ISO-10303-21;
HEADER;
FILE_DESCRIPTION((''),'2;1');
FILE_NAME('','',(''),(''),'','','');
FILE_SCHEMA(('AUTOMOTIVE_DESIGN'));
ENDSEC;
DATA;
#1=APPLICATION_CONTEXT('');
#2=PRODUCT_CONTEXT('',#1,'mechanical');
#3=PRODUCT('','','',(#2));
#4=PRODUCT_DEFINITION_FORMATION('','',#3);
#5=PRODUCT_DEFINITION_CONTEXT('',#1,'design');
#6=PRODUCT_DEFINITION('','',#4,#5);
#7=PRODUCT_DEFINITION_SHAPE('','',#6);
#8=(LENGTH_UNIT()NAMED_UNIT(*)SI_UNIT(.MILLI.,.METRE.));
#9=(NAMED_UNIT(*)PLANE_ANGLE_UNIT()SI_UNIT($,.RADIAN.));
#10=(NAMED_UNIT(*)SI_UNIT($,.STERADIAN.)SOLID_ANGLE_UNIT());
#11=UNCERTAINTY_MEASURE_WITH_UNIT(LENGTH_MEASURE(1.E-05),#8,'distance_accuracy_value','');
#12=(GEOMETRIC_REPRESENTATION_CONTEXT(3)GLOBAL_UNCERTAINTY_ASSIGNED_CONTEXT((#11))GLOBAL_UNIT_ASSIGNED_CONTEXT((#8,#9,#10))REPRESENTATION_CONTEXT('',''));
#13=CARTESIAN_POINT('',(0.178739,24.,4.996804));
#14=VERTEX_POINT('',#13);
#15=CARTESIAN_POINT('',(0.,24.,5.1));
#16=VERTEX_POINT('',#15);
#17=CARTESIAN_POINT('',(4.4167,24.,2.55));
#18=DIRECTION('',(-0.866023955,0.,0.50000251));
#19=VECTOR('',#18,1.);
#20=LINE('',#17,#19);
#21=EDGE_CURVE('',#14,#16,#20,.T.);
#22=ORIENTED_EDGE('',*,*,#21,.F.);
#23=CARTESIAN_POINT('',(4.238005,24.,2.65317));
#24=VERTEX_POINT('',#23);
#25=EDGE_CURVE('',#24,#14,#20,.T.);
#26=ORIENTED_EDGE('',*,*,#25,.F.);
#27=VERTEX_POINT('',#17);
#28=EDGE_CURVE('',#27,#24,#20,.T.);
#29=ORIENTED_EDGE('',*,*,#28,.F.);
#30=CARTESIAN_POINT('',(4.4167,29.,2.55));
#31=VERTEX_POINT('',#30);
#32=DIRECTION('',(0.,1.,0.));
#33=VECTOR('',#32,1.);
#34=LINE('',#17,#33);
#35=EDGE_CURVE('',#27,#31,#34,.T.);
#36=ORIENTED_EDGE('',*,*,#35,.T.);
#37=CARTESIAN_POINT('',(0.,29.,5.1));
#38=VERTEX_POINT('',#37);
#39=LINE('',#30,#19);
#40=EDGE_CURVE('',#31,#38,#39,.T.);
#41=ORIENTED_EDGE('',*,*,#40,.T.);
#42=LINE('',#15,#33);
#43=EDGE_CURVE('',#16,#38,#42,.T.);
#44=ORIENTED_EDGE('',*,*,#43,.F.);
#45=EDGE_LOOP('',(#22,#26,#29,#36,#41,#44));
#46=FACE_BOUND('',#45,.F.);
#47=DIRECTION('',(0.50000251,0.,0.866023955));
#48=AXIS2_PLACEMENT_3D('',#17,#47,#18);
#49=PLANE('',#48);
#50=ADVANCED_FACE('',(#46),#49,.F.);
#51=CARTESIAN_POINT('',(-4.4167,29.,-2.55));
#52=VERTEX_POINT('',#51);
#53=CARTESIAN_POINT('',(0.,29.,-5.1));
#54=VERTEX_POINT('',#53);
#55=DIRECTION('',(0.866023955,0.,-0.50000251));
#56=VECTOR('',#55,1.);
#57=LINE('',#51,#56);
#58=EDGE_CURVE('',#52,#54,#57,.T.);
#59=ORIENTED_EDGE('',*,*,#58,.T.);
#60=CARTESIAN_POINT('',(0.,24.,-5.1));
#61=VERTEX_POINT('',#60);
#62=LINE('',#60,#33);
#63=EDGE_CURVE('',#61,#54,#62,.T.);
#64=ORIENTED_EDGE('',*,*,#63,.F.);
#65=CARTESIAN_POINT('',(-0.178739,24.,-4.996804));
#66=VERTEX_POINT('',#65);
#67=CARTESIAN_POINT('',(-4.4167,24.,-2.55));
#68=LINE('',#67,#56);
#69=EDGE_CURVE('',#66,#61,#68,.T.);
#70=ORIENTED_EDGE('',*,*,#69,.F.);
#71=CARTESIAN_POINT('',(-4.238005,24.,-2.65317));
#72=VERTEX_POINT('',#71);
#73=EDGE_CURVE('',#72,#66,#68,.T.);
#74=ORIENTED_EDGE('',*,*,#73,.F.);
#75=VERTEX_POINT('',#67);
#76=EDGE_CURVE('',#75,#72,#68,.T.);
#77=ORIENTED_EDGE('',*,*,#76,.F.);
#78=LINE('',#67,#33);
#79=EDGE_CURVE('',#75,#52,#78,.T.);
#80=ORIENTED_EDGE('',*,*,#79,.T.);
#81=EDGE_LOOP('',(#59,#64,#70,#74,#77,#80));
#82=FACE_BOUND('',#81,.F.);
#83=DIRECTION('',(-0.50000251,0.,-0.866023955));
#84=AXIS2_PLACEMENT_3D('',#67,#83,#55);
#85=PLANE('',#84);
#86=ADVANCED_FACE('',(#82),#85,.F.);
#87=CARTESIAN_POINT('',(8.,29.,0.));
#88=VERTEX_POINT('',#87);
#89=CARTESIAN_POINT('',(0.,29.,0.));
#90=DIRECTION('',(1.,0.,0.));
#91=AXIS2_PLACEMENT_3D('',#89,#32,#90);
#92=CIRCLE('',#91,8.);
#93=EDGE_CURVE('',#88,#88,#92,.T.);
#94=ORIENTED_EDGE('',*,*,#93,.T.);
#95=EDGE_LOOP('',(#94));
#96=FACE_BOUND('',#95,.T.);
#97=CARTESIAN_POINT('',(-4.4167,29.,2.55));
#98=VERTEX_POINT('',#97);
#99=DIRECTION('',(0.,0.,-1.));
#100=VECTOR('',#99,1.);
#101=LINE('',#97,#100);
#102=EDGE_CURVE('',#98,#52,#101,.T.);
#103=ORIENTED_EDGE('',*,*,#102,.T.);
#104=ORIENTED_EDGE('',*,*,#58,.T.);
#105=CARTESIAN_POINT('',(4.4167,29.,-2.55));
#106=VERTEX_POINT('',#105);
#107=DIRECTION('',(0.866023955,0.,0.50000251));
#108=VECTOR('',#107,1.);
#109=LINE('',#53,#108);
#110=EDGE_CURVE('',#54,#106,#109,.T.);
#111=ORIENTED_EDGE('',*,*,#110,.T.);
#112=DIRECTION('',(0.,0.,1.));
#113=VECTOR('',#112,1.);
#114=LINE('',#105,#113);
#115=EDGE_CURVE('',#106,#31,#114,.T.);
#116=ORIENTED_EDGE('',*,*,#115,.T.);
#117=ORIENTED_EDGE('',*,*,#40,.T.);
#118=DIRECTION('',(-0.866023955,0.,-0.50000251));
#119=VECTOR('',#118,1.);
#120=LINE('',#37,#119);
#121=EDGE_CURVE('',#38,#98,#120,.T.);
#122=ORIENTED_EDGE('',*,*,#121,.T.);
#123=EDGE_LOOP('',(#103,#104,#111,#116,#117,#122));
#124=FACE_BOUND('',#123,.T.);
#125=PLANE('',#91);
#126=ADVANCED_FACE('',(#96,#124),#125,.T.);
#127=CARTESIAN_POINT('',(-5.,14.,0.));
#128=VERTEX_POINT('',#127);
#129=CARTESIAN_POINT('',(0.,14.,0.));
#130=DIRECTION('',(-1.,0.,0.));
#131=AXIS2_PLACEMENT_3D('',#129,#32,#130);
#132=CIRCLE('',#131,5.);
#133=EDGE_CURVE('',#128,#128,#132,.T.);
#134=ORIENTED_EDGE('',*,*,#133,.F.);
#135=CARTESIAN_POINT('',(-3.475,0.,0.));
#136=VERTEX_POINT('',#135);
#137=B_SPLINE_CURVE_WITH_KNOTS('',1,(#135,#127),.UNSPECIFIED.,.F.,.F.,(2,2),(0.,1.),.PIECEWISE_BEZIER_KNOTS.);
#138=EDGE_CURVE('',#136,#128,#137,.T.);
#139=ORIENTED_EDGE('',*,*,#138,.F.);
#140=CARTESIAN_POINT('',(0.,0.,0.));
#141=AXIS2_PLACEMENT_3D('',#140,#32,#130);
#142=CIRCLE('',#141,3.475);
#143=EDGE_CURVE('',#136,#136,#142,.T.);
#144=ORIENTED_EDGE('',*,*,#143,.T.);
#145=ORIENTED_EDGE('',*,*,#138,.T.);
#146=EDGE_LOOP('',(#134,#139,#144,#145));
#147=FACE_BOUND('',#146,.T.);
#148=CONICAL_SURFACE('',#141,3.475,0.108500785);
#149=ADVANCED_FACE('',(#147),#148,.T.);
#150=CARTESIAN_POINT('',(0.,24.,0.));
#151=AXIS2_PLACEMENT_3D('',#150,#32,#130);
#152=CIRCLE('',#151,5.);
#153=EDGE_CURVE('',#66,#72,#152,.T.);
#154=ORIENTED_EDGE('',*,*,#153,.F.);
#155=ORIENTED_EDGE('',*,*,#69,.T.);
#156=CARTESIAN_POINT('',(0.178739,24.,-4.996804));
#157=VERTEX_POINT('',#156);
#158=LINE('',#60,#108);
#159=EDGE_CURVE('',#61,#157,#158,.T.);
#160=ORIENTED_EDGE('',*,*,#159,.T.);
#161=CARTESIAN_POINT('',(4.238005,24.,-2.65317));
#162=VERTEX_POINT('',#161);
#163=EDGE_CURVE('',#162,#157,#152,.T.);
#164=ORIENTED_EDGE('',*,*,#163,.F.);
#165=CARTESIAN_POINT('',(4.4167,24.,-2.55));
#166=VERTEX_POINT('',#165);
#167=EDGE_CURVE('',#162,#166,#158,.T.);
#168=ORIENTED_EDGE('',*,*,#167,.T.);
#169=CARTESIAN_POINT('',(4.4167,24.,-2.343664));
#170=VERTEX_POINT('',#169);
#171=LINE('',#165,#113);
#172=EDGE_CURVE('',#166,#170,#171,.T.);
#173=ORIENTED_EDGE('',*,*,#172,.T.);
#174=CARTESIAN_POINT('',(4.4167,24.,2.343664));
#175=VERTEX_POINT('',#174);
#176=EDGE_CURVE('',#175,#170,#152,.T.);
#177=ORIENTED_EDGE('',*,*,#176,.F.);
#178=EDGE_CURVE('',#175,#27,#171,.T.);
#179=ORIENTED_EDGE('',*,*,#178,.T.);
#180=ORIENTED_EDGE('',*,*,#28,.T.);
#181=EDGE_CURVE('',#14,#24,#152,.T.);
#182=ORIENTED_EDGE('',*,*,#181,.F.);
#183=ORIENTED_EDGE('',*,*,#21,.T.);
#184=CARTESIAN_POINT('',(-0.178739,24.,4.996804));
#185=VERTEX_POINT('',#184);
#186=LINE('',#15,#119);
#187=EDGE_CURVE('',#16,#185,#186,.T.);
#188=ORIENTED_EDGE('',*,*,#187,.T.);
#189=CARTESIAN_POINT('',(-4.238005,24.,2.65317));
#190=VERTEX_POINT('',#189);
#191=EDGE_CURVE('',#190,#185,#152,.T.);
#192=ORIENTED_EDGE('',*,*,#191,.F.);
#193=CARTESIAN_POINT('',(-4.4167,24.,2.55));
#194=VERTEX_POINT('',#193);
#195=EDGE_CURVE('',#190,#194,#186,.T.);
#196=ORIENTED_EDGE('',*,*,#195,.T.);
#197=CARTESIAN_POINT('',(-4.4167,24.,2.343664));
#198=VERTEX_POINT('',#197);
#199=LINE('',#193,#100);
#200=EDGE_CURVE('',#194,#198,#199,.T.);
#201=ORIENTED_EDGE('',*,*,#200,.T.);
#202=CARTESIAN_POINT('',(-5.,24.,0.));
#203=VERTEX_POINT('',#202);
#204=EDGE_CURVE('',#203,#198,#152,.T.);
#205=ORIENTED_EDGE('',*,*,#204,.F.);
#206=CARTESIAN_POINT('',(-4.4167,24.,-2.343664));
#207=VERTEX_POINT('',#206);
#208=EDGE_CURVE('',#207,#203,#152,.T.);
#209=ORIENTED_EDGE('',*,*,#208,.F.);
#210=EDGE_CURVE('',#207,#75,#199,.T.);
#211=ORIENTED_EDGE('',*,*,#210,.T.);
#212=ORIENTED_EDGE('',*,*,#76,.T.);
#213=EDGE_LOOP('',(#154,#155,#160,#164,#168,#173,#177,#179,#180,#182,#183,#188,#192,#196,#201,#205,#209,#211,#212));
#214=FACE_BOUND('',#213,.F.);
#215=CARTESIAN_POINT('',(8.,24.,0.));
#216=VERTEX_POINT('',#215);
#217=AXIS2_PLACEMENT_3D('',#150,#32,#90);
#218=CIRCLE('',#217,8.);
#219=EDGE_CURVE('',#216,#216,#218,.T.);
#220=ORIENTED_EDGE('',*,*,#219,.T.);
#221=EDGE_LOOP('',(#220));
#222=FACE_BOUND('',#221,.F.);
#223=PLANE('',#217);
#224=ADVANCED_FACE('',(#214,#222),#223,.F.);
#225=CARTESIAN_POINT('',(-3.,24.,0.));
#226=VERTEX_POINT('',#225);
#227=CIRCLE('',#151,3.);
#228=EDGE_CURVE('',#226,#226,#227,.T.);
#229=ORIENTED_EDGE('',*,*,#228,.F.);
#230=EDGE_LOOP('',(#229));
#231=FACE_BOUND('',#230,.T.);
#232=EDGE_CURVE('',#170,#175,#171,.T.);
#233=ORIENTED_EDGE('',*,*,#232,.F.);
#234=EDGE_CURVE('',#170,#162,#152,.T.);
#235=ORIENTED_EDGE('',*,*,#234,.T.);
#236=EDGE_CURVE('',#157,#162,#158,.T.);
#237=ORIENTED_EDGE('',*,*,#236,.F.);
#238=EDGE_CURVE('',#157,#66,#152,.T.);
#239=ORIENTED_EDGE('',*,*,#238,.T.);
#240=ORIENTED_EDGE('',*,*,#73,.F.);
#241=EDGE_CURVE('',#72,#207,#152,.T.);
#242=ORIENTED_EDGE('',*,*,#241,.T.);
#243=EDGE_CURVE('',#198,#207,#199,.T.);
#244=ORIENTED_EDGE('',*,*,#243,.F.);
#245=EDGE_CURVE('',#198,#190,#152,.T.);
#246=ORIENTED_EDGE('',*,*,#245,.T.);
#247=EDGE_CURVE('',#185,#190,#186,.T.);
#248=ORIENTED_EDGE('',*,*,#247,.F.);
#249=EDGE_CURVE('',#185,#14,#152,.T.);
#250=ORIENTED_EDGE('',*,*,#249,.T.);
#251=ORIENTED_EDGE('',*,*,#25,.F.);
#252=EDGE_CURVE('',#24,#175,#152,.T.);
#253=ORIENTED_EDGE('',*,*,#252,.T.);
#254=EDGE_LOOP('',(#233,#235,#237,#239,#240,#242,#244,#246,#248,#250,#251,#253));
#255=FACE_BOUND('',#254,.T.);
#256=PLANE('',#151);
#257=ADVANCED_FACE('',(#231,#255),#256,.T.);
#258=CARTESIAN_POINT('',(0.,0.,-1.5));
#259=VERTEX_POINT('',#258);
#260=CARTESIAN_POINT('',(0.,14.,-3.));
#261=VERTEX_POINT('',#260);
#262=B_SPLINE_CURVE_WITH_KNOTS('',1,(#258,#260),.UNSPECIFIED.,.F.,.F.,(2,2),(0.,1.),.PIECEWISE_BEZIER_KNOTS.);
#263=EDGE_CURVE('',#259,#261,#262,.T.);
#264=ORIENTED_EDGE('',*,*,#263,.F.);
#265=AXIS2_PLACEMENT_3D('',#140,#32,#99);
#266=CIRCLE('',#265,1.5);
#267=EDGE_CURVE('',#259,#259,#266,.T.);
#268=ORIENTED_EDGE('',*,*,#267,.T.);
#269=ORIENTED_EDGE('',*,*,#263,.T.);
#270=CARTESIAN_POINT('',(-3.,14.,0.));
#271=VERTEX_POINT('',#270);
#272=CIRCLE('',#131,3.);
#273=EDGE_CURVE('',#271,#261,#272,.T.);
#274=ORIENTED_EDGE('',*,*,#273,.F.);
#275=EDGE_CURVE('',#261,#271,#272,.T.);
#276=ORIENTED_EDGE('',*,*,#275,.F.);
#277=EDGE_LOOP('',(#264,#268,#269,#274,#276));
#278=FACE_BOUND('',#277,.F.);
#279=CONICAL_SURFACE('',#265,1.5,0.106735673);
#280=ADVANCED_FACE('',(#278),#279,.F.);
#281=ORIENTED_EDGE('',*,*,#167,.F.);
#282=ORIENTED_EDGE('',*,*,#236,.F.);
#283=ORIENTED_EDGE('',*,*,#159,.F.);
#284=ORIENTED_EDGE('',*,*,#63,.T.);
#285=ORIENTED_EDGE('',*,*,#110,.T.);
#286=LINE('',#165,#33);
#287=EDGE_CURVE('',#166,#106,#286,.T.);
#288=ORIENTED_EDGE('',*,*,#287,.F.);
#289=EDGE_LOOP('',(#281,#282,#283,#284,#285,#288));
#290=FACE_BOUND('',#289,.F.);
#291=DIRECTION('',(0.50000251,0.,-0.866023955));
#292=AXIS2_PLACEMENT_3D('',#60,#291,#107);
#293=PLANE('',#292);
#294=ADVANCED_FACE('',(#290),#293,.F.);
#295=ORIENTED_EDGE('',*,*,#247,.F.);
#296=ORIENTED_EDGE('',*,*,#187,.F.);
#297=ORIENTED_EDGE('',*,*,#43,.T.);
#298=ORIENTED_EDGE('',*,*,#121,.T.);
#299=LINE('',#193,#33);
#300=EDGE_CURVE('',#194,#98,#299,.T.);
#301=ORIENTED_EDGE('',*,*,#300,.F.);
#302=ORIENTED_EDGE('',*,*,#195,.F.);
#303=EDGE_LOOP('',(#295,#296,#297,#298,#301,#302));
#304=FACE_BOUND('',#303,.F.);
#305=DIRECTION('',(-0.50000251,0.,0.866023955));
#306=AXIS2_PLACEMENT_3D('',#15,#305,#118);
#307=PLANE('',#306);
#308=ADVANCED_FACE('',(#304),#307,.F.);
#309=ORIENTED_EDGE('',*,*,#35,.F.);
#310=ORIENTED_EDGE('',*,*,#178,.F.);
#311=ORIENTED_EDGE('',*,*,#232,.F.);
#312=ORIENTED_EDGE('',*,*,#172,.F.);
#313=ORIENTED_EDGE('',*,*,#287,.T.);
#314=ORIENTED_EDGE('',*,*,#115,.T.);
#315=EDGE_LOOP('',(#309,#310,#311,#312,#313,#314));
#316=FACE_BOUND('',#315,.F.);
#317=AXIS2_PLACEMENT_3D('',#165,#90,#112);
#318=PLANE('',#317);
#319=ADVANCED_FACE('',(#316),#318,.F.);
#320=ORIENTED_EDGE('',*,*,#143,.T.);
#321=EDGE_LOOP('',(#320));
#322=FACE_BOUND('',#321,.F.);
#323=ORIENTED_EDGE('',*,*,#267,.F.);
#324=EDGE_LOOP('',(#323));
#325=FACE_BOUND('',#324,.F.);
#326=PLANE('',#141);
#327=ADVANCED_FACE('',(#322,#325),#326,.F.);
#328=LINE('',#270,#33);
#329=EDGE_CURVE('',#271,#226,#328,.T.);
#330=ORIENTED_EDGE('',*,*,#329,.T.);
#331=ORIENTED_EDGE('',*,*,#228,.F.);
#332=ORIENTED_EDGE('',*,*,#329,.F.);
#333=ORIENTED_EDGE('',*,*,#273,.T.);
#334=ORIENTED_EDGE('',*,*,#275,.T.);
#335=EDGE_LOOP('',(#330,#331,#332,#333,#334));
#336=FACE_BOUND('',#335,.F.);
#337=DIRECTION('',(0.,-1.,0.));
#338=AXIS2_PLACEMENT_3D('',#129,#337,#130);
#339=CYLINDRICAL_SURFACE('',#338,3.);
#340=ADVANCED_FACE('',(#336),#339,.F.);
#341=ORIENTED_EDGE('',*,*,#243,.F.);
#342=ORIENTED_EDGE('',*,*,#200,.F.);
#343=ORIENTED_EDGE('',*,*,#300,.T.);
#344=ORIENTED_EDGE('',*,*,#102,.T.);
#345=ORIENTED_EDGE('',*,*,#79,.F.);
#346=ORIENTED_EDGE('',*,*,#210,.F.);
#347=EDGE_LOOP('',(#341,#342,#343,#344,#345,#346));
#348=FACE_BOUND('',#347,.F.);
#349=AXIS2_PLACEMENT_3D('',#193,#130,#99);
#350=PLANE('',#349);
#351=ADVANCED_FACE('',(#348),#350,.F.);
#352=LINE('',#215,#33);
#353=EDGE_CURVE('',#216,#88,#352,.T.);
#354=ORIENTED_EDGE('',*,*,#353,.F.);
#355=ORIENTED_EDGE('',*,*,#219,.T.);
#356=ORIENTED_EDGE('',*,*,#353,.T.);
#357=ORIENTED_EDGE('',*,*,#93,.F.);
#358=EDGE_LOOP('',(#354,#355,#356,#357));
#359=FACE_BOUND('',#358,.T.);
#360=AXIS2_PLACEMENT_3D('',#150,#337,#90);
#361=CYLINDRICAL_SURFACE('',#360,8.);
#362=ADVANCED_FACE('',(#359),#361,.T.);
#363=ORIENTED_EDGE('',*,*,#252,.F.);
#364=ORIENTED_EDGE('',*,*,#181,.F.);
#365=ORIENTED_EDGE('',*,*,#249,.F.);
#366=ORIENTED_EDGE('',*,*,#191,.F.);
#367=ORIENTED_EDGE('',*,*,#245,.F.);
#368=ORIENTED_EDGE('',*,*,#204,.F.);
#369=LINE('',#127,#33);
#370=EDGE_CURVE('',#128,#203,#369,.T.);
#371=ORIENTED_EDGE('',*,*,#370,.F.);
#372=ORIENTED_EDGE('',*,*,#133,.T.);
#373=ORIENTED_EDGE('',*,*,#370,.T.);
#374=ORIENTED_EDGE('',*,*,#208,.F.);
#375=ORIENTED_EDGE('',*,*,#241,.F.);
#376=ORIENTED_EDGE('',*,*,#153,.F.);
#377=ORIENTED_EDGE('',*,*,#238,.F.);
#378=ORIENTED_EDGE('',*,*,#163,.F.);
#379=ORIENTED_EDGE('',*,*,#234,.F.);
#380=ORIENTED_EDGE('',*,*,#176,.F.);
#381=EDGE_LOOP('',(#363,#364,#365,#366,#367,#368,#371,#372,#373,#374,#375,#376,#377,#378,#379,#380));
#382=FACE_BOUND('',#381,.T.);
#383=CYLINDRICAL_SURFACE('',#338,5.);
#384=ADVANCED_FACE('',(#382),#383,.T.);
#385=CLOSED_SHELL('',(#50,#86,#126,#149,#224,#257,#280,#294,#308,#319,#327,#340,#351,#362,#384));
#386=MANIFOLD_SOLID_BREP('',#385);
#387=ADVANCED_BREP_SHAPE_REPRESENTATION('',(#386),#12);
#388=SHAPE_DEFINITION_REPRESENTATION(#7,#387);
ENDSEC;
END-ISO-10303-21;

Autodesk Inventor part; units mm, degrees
ref_plane "YZ Plane" through (0, 0, 0) normal (1, 0, 0) x (0, 1, 0)
ref_plane "XY Plane" through (0, 0, 0) normal (0, 0, 1) x (1, 0, 0)
sketch "Sketch1" plane through (0, 0, 0) normal (0, 1, 0) x (-1, 0, 0)
  circle A0 centre (0, 0) radius 3.475
  circle A1 centre (0, 0) radius 1.5
  dimension "d0" = 6.95
  dimension "d11" = 3
ref_plane "Work Plane1" through (0, 14, 0) normal (0, 1, 0) x (-1, 0, 0)
sketch "Sketch2" plane through (0, 14, 0) normal (0, 1, 0) x (-1, 0, 0)
  circle A0 centre (0, 0) radius 5
  circle A1 centre (0, 0) radius 3
  dimension "d6" = 10
  dimension "d12" = 6
loft "Loft1" add profiles "Sketch1", "Sketch2" contours A0 | A1 / A0 | A1
extrude "Extrusion2" add sketch "Sketch2" along normal blind 10
hole "Hole3" at (0, 0, 0) direction (0, 1, 0) diameter 3 end through all
loft "Loft2" cut section 1 edges at (0, 0, 1.5) section 2 edges at (3, 14, 0)
sketch "Sketch3" plane through (0, 24, 0) normal (0, 1, 0) x (1, 0, 0)
  circle A0 centre (0, 0) radius 3
  circle A1 centre (0, 0) radius 5.1
  circle A2 centre (0, 0) radius 1.5 projected
  line L0 (0, 5.1) -> (4.4167, 2.55)
  line L1 (4.4167, 2.55) -> (4.4167, -2.55)
  line L2 (4.4167, -2.55) -> (0, -5.1)
  line L3 (0, -5.1) -> (-4.4167, -2.55)
  line L4 (-4.4167, -2.55) -> (-4.4167, 2.55)
  line L5 (-4.4167, 2.55) -> (0, 5.1)
  circle A3 centre (0, 0) radius 8
  dimension "d43" = 10.2
  dimension "d42" = 6
  dimension "d44" = 16
extrude "Extrusion3" add sketch "Sketch3" along normal blind 5 contours A1 L1 | L0 A1 | A1 L2 | L5 A1 | A1 L3 | L4 A1 | A3
properties part number "vacuum-nozzle-shaft"
